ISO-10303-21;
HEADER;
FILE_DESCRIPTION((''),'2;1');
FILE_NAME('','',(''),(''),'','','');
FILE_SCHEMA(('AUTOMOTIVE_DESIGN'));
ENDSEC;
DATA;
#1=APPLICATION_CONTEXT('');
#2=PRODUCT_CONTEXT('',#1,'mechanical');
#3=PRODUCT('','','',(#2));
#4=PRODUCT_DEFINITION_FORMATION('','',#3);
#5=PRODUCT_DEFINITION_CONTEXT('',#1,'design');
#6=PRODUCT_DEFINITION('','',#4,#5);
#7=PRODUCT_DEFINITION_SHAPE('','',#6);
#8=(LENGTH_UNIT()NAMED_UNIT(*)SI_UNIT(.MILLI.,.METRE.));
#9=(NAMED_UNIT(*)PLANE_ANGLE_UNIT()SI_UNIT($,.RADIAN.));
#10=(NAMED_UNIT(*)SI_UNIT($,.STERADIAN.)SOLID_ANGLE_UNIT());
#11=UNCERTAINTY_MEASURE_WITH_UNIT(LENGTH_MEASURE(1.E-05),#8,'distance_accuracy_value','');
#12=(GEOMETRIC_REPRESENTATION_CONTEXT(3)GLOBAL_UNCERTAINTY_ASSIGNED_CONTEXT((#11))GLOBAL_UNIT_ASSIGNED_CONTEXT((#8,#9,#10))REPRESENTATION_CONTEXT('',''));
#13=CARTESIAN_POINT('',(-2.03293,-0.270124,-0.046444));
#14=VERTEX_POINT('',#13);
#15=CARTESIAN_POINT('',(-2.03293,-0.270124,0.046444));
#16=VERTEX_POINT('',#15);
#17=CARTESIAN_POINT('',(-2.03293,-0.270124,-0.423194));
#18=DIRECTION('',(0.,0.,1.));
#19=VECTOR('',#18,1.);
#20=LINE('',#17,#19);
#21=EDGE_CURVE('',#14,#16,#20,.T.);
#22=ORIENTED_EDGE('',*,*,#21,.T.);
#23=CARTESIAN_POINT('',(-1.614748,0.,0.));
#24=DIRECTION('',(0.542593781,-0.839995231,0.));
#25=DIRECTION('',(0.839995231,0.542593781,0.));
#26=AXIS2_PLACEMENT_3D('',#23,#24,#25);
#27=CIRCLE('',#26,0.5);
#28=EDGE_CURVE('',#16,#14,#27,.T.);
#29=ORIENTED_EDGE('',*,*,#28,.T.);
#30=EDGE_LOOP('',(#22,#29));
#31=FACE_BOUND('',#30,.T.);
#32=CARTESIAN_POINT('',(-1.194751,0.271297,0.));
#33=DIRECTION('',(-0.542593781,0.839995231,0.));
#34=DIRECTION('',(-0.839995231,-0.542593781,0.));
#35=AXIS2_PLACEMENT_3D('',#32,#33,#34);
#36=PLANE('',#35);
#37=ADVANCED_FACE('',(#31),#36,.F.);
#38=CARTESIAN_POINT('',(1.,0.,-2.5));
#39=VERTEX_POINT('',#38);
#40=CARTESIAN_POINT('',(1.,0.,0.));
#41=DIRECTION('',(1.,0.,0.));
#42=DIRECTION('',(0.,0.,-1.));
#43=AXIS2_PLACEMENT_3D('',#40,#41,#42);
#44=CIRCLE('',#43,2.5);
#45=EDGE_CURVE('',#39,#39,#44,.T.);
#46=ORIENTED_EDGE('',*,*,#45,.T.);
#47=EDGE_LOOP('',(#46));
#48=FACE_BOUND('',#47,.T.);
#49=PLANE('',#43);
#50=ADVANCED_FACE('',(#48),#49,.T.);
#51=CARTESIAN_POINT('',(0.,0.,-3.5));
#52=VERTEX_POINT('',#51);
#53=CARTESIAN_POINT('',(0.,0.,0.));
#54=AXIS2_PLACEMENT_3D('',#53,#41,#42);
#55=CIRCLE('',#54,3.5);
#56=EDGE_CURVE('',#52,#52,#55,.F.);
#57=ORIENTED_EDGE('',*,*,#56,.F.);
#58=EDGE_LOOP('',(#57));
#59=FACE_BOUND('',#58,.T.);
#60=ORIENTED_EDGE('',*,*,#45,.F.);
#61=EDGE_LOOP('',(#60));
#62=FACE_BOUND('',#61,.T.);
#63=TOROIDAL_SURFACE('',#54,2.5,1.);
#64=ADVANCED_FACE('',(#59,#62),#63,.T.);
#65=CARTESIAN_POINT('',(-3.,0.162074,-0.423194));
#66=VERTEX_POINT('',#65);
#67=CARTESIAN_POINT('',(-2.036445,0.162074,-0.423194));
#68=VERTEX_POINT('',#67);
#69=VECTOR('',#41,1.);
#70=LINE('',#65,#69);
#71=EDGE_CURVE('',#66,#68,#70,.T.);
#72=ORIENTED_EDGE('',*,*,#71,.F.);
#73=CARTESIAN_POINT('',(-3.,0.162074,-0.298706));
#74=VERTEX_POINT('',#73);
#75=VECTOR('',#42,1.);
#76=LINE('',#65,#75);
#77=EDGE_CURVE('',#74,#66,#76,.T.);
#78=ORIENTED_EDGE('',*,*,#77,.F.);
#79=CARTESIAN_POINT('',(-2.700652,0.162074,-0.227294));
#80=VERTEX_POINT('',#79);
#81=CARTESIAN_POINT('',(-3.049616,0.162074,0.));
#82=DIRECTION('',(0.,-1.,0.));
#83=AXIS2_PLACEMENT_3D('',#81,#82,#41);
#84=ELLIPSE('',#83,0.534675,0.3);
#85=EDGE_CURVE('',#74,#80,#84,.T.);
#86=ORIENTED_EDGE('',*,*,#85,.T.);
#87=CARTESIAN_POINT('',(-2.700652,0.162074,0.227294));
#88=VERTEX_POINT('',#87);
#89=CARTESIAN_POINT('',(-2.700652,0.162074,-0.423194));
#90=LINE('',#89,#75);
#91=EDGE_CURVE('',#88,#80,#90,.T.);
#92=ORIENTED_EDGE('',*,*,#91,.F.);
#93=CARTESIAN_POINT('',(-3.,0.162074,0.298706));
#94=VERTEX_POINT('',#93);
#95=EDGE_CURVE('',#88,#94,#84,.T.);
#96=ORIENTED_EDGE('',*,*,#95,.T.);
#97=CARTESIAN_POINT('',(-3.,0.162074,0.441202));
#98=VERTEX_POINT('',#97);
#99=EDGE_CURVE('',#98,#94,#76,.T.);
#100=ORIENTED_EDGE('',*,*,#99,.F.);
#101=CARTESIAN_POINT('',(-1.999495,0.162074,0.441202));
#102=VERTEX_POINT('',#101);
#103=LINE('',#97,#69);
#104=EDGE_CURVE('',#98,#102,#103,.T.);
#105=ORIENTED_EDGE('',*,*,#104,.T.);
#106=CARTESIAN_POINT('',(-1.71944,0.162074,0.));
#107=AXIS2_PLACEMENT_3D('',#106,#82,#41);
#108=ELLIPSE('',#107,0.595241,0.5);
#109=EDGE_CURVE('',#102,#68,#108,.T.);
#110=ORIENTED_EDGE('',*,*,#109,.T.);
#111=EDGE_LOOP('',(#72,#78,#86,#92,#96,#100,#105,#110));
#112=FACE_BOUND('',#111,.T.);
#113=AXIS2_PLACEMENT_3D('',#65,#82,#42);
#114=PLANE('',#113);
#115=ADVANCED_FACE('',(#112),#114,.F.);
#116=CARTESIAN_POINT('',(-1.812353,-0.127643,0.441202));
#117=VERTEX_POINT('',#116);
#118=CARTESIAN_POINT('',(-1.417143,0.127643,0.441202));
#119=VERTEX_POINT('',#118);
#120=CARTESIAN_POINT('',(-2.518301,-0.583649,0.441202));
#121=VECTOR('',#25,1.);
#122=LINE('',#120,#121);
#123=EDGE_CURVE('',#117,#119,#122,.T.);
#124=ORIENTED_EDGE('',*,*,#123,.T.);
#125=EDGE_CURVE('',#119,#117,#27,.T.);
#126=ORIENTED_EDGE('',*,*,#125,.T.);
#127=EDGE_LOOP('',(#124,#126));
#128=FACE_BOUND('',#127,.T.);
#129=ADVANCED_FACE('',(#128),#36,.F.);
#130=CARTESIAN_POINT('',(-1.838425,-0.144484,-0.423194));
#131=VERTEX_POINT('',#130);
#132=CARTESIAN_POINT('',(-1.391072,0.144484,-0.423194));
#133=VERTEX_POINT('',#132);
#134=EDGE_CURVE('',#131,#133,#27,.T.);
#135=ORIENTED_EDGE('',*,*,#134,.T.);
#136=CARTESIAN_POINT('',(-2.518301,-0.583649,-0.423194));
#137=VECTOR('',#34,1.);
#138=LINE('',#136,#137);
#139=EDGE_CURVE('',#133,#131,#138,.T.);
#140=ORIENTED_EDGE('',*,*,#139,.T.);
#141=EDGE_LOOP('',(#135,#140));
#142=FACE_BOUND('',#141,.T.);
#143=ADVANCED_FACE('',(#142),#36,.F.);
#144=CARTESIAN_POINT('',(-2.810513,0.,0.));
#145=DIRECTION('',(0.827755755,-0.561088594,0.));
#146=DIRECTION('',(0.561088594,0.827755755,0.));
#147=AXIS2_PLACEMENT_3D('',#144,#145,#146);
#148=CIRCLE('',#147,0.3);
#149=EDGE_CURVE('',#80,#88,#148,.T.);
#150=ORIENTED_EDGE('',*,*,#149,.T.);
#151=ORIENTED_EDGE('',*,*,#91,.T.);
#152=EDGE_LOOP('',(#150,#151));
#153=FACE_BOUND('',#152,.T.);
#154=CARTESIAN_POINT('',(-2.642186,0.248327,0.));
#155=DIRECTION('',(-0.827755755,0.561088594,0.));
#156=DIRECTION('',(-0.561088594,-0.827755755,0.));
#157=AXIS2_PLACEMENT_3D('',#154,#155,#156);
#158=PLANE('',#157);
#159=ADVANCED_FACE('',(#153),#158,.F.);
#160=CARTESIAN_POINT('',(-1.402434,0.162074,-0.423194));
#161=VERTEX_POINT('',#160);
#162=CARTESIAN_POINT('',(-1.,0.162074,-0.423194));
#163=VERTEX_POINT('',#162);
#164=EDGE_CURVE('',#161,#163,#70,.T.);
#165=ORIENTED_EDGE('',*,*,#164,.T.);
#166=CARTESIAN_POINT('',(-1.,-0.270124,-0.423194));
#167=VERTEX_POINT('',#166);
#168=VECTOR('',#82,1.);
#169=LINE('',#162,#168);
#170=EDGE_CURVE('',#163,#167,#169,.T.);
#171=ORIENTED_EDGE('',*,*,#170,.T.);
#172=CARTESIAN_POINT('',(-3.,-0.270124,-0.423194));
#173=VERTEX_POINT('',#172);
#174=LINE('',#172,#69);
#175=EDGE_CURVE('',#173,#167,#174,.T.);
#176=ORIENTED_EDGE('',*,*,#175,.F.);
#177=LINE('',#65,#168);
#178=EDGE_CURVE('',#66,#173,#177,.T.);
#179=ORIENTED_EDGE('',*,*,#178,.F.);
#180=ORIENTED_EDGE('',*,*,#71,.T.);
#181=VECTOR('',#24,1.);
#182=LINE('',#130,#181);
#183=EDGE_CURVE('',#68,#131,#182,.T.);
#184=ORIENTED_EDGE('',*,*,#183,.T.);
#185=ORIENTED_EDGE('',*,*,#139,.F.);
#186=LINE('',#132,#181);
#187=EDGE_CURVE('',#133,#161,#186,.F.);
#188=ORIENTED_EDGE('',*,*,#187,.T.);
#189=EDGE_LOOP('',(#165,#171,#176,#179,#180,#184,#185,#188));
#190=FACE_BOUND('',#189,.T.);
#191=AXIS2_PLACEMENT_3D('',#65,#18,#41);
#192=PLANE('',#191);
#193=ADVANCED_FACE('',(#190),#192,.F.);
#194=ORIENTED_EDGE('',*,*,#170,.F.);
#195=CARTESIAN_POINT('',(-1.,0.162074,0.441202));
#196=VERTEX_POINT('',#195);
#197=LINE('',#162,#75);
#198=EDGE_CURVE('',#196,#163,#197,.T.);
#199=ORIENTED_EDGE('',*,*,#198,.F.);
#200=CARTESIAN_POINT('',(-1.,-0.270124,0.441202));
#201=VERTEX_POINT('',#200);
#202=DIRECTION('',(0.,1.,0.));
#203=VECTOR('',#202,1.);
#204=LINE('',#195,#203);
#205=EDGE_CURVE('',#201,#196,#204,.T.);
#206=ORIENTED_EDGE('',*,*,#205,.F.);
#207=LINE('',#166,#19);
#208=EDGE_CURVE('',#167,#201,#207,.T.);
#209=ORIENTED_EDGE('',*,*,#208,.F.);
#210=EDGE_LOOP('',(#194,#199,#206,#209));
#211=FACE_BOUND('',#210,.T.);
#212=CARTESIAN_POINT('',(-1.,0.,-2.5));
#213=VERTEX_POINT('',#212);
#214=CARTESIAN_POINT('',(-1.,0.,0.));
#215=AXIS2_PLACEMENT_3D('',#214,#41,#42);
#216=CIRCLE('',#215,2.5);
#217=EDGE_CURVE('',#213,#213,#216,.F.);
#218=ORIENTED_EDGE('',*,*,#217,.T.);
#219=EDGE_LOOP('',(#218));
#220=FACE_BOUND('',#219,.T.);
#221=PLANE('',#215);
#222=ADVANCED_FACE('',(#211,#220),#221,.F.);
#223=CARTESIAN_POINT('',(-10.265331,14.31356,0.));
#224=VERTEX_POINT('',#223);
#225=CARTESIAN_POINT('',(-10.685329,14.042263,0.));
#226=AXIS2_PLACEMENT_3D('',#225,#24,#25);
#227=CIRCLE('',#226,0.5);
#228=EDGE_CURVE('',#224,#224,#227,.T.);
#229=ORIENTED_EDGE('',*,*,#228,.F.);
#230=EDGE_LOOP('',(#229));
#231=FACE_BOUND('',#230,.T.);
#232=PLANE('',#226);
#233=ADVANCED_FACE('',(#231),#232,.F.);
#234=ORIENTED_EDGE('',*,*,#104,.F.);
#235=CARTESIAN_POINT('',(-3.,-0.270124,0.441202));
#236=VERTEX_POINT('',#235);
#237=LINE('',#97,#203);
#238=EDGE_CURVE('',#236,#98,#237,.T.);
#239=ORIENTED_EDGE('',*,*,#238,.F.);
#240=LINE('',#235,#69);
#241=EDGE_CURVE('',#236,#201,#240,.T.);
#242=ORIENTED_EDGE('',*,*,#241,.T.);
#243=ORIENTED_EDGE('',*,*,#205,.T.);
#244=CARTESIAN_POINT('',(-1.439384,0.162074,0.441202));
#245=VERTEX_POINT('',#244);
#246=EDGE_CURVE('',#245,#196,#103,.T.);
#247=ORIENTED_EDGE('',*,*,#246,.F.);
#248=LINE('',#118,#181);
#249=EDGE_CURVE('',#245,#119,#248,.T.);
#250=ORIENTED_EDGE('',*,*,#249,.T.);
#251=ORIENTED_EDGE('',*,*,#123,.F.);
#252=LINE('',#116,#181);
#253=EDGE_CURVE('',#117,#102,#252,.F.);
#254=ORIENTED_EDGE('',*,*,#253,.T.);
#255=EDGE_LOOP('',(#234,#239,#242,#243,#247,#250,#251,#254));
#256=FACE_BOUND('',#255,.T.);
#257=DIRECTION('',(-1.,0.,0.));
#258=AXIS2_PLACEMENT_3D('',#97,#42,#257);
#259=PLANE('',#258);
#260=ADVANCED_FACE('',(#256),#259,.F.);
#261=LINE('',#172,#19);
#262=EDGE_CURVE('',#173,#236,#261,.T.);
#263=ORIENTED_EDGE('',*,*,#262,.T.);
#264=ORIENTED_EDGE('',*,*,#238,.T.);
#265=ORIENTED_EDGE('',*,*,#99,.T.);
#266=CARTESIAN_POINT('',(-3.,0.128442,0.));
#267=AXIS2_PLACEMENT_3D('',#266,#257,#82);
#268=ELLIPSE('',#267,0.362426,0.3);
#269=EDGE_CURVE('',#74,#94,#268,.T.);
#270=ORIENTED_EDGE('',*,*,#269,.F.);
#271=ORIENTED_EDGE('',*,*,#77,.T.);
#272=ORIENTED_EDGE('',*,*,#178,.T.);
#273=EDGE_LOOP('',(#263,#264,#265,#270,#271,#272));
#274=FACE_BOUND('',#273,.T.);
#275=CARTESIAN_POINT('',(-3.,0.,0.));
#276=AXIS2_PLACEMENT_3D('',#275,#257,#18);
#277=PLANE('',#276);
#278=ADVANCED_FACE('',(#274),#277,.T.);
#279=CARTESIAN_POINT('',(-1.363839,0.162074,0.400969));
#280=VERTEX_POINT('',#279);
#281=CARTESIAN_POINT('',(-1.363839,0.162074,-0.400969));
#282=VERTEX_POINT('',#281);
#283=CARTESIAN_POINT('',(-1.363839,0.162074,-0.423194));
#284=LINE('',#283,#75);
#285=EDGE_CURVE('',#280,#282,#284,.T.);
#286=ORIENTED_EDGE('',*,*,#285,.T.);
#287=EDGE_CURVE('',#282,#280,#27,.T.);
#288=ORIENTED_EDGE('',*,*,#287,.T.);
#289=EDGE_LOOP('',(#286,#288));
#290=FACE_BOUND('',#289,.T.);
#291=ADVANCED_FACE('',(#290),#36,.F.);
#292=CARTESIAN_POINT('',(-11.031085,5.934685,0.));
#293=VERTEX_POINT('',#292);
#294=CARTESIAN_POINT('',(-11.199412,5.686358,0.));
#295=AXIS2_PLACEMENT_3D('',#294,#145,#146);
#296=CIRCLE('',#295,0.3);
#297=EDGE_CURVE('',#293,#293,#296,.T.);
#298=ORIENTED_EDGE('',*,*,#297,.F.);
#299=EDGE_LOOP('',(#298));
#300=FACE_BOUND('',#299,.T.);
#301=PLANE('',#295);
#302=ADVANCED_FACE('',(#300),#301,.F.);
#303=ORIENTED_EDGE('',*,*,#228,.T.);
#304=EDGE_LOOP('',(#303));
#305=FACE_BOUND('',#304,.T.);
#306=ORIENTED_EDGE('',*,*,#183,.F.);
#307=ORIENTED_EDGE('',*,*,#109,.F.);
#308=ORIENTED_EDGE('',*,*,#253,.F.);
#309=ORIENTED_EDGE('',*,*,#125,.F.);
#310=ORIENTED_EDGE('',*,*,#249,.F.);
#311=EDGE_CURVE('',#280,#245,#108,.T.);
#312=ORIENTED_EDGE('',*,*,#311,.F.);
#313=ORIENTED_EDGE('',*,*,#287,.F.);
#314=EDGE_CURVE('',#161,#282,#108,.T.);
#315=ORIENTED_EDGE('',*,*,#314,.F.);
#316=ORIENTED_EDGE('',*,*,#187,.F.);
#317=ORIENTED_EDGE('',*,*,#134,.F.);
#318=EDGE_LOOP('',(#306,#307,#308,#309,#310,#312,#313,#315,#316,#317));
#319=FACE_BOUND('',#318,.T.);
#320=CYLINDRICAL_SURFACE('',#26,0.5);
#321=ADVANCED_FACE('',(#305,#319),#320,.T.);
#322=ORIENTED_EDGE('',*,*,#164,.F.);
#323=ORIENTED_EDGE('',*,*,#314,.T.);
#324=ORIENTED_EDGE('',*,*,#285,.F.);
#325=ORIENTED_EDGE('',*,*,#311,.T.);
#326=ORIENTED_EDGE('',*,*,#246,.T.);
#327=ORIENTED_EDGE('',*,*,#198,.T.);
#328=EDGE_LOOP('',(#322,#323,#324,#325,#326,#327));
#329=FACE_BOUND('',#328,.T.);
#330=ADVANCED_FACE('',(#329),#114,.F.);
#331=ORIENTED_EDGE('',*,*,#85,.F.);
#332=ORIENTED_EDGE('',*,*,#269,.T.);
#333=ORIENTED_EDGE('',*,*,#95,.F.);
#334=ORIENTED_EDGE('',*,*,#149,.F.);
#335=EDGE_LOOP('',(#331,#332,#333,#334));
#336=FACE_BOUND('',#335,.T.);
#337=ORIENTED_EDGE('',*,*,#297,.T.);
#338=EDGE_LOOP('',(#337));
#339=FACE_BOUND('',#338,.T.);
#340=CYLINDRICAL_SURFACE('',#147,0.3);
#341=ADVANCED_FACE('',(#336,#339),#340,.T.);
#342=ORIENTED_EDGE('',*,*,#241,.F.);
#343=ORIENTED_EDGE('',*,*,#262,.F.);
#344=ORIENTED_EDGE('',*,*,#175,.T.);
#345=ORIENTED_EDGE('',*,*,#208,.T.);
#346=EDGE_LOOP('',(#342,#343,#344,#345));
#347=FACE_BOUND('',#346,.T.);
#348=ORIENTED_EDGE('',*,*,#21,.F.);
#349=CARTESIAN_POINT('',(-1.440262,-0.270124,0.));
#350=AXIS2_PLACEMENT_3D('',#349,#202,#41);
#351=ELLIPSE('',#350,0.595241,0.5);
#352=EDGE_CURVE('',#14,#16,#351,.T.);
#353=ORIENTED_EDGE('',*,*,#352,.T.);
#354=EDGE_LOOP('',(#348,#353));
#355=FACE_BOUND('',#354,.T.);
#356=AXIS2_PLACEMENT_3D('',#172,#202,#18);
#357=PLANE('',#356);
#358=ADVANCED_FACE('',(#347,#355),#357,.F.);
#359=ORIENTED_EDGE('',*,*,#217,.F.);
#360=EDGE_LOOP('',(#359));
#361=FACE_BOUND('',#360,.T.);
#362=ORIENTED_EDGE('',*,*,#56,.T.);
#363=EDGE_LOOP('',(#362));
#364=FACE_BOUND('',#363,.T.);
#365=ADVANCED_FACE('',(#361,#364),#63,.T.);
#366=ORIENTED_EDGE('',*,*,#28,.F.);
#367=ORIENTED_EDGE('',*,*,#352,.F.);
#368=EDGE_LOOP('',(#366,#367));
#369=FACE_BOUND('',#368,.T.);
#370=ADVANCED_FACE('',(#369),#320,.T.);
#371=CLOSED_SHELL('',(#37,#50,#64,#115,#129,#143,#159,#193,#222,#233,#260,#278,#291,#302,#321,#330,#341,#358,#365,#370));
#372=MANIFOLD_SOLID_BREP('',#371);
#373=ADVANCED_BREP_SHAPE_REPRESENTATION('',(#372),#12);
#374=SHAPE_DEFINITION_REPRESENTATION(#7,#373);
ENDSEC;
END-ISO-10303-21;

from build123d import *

# Parameters (mm, degrees)
Y_KSEKLIK_EKSTR_ZYON1_DEPTH      = 1
Y_KSEKLIK_EKSTR_ZYON1_DEPTH_BACK = 1
IZIM1_R                          = 3.5
RADYUS1_R                        = 1
RADYUS2_R                        = 1
IZIM2_W                          = 0.864396699
IZIM2_H                          = 0.432198349
Y_KSEKLIK_EKSTR_ZYON2_DEPTH      = 2


with BuildPart() as part:
    # Çizim1 → Yükseklik-Ekstrüzyon1 (new, two sides: drawn at the far end of the back side and taken through both)
    with BuildSketch(Plane(origin=(0, 0, 0), x_dir=(0, 0, -1), z_dir=(1, 0, 0)).offset(-Y_KSEKLIK_EKSTR_ZYON1_DEPTH_BACK)):
        Circle(IZIM1_R)
    extrude(amount=Y_KSEKLIK_EKSTR_ZYON1_DEPTH + Y_KSEKLIK_EKSTR_ZYON1_DEPTH_BACK)

    # Radyus1
    radyus1_edges = [part.edges().sort_by_distance(p)[0] for p in [
        (1, 0, 3.5),
    ]]
    fillet(radyus1_edges, radius=RADYUS1_R - 0.0001)  # a hair under: the kernel refuses the full size

    # Radyus2
    radyus2_edges = [part.edges().sort_by_distance(p)[0] for p in [
        (-1, 0, 3.5),
    ]]
    fillet(radyus2_edges, radius=RADYUS2_R - 0.0001)  # a hair under: the kernel refuses the full size

    # Çizim2 → Yükseklik-Ekstrüzyon2 (add)
    with BuildSketch(Plane.ZY.offset(1)):
        with Locations((0.009004132, -0.054024793)):
            Rectangle(IZIM2_W, IZIM2_H)
    extrude(amount=Y_KSEKLIK_EKSTR_ZYON2_DEPTH)

    # Çizim3 → Döndür-İnce1 (revolve)
    with BuildSketch(Plane.XY, mode=Mode.PRIVATE) as d_nd_r_nce1_sk:
        Polygon((-1.61474818, 0), (-10.685328889, 14.04226294), (-11.105326504, 13.77096605), (-2.034745795, -0.27129689), align=None)
    revolve(d_nd_r_nce1_sk.sketch.rotate(Axis((-1.61474818, 0, 0), (-0.5425937809668819, 0.8399952314484074, 0)), 180), axis=Axis((-1.61474818, 0, 0), (-0.5425937809668819, 0.8399952314484074, 0)))

    # Çizim4 → Döndür-İnce2 (revolve)
    with BuildSketch(Plane.XY, mode=Mode.PRIVATE) as d_nd_r_nce2_sk:
        Polygon((-2.810513045, 0), (-11.199411855, 5.686357854), (-11.367738433, 5.438031127), (-2.978839623, -0.248326726), align=None)
    revolve(d_nd_r_nce2_sk.sketch.rotate(Axis((-2.810513045, 0, 0), (-0.8277557549139161, 0.561088593901973, 0)), 180), axis=Axis((-2.810513045, 0, 0), (-0.8277557549139161, 0.561088593901973, 0)))


solid = part.part
